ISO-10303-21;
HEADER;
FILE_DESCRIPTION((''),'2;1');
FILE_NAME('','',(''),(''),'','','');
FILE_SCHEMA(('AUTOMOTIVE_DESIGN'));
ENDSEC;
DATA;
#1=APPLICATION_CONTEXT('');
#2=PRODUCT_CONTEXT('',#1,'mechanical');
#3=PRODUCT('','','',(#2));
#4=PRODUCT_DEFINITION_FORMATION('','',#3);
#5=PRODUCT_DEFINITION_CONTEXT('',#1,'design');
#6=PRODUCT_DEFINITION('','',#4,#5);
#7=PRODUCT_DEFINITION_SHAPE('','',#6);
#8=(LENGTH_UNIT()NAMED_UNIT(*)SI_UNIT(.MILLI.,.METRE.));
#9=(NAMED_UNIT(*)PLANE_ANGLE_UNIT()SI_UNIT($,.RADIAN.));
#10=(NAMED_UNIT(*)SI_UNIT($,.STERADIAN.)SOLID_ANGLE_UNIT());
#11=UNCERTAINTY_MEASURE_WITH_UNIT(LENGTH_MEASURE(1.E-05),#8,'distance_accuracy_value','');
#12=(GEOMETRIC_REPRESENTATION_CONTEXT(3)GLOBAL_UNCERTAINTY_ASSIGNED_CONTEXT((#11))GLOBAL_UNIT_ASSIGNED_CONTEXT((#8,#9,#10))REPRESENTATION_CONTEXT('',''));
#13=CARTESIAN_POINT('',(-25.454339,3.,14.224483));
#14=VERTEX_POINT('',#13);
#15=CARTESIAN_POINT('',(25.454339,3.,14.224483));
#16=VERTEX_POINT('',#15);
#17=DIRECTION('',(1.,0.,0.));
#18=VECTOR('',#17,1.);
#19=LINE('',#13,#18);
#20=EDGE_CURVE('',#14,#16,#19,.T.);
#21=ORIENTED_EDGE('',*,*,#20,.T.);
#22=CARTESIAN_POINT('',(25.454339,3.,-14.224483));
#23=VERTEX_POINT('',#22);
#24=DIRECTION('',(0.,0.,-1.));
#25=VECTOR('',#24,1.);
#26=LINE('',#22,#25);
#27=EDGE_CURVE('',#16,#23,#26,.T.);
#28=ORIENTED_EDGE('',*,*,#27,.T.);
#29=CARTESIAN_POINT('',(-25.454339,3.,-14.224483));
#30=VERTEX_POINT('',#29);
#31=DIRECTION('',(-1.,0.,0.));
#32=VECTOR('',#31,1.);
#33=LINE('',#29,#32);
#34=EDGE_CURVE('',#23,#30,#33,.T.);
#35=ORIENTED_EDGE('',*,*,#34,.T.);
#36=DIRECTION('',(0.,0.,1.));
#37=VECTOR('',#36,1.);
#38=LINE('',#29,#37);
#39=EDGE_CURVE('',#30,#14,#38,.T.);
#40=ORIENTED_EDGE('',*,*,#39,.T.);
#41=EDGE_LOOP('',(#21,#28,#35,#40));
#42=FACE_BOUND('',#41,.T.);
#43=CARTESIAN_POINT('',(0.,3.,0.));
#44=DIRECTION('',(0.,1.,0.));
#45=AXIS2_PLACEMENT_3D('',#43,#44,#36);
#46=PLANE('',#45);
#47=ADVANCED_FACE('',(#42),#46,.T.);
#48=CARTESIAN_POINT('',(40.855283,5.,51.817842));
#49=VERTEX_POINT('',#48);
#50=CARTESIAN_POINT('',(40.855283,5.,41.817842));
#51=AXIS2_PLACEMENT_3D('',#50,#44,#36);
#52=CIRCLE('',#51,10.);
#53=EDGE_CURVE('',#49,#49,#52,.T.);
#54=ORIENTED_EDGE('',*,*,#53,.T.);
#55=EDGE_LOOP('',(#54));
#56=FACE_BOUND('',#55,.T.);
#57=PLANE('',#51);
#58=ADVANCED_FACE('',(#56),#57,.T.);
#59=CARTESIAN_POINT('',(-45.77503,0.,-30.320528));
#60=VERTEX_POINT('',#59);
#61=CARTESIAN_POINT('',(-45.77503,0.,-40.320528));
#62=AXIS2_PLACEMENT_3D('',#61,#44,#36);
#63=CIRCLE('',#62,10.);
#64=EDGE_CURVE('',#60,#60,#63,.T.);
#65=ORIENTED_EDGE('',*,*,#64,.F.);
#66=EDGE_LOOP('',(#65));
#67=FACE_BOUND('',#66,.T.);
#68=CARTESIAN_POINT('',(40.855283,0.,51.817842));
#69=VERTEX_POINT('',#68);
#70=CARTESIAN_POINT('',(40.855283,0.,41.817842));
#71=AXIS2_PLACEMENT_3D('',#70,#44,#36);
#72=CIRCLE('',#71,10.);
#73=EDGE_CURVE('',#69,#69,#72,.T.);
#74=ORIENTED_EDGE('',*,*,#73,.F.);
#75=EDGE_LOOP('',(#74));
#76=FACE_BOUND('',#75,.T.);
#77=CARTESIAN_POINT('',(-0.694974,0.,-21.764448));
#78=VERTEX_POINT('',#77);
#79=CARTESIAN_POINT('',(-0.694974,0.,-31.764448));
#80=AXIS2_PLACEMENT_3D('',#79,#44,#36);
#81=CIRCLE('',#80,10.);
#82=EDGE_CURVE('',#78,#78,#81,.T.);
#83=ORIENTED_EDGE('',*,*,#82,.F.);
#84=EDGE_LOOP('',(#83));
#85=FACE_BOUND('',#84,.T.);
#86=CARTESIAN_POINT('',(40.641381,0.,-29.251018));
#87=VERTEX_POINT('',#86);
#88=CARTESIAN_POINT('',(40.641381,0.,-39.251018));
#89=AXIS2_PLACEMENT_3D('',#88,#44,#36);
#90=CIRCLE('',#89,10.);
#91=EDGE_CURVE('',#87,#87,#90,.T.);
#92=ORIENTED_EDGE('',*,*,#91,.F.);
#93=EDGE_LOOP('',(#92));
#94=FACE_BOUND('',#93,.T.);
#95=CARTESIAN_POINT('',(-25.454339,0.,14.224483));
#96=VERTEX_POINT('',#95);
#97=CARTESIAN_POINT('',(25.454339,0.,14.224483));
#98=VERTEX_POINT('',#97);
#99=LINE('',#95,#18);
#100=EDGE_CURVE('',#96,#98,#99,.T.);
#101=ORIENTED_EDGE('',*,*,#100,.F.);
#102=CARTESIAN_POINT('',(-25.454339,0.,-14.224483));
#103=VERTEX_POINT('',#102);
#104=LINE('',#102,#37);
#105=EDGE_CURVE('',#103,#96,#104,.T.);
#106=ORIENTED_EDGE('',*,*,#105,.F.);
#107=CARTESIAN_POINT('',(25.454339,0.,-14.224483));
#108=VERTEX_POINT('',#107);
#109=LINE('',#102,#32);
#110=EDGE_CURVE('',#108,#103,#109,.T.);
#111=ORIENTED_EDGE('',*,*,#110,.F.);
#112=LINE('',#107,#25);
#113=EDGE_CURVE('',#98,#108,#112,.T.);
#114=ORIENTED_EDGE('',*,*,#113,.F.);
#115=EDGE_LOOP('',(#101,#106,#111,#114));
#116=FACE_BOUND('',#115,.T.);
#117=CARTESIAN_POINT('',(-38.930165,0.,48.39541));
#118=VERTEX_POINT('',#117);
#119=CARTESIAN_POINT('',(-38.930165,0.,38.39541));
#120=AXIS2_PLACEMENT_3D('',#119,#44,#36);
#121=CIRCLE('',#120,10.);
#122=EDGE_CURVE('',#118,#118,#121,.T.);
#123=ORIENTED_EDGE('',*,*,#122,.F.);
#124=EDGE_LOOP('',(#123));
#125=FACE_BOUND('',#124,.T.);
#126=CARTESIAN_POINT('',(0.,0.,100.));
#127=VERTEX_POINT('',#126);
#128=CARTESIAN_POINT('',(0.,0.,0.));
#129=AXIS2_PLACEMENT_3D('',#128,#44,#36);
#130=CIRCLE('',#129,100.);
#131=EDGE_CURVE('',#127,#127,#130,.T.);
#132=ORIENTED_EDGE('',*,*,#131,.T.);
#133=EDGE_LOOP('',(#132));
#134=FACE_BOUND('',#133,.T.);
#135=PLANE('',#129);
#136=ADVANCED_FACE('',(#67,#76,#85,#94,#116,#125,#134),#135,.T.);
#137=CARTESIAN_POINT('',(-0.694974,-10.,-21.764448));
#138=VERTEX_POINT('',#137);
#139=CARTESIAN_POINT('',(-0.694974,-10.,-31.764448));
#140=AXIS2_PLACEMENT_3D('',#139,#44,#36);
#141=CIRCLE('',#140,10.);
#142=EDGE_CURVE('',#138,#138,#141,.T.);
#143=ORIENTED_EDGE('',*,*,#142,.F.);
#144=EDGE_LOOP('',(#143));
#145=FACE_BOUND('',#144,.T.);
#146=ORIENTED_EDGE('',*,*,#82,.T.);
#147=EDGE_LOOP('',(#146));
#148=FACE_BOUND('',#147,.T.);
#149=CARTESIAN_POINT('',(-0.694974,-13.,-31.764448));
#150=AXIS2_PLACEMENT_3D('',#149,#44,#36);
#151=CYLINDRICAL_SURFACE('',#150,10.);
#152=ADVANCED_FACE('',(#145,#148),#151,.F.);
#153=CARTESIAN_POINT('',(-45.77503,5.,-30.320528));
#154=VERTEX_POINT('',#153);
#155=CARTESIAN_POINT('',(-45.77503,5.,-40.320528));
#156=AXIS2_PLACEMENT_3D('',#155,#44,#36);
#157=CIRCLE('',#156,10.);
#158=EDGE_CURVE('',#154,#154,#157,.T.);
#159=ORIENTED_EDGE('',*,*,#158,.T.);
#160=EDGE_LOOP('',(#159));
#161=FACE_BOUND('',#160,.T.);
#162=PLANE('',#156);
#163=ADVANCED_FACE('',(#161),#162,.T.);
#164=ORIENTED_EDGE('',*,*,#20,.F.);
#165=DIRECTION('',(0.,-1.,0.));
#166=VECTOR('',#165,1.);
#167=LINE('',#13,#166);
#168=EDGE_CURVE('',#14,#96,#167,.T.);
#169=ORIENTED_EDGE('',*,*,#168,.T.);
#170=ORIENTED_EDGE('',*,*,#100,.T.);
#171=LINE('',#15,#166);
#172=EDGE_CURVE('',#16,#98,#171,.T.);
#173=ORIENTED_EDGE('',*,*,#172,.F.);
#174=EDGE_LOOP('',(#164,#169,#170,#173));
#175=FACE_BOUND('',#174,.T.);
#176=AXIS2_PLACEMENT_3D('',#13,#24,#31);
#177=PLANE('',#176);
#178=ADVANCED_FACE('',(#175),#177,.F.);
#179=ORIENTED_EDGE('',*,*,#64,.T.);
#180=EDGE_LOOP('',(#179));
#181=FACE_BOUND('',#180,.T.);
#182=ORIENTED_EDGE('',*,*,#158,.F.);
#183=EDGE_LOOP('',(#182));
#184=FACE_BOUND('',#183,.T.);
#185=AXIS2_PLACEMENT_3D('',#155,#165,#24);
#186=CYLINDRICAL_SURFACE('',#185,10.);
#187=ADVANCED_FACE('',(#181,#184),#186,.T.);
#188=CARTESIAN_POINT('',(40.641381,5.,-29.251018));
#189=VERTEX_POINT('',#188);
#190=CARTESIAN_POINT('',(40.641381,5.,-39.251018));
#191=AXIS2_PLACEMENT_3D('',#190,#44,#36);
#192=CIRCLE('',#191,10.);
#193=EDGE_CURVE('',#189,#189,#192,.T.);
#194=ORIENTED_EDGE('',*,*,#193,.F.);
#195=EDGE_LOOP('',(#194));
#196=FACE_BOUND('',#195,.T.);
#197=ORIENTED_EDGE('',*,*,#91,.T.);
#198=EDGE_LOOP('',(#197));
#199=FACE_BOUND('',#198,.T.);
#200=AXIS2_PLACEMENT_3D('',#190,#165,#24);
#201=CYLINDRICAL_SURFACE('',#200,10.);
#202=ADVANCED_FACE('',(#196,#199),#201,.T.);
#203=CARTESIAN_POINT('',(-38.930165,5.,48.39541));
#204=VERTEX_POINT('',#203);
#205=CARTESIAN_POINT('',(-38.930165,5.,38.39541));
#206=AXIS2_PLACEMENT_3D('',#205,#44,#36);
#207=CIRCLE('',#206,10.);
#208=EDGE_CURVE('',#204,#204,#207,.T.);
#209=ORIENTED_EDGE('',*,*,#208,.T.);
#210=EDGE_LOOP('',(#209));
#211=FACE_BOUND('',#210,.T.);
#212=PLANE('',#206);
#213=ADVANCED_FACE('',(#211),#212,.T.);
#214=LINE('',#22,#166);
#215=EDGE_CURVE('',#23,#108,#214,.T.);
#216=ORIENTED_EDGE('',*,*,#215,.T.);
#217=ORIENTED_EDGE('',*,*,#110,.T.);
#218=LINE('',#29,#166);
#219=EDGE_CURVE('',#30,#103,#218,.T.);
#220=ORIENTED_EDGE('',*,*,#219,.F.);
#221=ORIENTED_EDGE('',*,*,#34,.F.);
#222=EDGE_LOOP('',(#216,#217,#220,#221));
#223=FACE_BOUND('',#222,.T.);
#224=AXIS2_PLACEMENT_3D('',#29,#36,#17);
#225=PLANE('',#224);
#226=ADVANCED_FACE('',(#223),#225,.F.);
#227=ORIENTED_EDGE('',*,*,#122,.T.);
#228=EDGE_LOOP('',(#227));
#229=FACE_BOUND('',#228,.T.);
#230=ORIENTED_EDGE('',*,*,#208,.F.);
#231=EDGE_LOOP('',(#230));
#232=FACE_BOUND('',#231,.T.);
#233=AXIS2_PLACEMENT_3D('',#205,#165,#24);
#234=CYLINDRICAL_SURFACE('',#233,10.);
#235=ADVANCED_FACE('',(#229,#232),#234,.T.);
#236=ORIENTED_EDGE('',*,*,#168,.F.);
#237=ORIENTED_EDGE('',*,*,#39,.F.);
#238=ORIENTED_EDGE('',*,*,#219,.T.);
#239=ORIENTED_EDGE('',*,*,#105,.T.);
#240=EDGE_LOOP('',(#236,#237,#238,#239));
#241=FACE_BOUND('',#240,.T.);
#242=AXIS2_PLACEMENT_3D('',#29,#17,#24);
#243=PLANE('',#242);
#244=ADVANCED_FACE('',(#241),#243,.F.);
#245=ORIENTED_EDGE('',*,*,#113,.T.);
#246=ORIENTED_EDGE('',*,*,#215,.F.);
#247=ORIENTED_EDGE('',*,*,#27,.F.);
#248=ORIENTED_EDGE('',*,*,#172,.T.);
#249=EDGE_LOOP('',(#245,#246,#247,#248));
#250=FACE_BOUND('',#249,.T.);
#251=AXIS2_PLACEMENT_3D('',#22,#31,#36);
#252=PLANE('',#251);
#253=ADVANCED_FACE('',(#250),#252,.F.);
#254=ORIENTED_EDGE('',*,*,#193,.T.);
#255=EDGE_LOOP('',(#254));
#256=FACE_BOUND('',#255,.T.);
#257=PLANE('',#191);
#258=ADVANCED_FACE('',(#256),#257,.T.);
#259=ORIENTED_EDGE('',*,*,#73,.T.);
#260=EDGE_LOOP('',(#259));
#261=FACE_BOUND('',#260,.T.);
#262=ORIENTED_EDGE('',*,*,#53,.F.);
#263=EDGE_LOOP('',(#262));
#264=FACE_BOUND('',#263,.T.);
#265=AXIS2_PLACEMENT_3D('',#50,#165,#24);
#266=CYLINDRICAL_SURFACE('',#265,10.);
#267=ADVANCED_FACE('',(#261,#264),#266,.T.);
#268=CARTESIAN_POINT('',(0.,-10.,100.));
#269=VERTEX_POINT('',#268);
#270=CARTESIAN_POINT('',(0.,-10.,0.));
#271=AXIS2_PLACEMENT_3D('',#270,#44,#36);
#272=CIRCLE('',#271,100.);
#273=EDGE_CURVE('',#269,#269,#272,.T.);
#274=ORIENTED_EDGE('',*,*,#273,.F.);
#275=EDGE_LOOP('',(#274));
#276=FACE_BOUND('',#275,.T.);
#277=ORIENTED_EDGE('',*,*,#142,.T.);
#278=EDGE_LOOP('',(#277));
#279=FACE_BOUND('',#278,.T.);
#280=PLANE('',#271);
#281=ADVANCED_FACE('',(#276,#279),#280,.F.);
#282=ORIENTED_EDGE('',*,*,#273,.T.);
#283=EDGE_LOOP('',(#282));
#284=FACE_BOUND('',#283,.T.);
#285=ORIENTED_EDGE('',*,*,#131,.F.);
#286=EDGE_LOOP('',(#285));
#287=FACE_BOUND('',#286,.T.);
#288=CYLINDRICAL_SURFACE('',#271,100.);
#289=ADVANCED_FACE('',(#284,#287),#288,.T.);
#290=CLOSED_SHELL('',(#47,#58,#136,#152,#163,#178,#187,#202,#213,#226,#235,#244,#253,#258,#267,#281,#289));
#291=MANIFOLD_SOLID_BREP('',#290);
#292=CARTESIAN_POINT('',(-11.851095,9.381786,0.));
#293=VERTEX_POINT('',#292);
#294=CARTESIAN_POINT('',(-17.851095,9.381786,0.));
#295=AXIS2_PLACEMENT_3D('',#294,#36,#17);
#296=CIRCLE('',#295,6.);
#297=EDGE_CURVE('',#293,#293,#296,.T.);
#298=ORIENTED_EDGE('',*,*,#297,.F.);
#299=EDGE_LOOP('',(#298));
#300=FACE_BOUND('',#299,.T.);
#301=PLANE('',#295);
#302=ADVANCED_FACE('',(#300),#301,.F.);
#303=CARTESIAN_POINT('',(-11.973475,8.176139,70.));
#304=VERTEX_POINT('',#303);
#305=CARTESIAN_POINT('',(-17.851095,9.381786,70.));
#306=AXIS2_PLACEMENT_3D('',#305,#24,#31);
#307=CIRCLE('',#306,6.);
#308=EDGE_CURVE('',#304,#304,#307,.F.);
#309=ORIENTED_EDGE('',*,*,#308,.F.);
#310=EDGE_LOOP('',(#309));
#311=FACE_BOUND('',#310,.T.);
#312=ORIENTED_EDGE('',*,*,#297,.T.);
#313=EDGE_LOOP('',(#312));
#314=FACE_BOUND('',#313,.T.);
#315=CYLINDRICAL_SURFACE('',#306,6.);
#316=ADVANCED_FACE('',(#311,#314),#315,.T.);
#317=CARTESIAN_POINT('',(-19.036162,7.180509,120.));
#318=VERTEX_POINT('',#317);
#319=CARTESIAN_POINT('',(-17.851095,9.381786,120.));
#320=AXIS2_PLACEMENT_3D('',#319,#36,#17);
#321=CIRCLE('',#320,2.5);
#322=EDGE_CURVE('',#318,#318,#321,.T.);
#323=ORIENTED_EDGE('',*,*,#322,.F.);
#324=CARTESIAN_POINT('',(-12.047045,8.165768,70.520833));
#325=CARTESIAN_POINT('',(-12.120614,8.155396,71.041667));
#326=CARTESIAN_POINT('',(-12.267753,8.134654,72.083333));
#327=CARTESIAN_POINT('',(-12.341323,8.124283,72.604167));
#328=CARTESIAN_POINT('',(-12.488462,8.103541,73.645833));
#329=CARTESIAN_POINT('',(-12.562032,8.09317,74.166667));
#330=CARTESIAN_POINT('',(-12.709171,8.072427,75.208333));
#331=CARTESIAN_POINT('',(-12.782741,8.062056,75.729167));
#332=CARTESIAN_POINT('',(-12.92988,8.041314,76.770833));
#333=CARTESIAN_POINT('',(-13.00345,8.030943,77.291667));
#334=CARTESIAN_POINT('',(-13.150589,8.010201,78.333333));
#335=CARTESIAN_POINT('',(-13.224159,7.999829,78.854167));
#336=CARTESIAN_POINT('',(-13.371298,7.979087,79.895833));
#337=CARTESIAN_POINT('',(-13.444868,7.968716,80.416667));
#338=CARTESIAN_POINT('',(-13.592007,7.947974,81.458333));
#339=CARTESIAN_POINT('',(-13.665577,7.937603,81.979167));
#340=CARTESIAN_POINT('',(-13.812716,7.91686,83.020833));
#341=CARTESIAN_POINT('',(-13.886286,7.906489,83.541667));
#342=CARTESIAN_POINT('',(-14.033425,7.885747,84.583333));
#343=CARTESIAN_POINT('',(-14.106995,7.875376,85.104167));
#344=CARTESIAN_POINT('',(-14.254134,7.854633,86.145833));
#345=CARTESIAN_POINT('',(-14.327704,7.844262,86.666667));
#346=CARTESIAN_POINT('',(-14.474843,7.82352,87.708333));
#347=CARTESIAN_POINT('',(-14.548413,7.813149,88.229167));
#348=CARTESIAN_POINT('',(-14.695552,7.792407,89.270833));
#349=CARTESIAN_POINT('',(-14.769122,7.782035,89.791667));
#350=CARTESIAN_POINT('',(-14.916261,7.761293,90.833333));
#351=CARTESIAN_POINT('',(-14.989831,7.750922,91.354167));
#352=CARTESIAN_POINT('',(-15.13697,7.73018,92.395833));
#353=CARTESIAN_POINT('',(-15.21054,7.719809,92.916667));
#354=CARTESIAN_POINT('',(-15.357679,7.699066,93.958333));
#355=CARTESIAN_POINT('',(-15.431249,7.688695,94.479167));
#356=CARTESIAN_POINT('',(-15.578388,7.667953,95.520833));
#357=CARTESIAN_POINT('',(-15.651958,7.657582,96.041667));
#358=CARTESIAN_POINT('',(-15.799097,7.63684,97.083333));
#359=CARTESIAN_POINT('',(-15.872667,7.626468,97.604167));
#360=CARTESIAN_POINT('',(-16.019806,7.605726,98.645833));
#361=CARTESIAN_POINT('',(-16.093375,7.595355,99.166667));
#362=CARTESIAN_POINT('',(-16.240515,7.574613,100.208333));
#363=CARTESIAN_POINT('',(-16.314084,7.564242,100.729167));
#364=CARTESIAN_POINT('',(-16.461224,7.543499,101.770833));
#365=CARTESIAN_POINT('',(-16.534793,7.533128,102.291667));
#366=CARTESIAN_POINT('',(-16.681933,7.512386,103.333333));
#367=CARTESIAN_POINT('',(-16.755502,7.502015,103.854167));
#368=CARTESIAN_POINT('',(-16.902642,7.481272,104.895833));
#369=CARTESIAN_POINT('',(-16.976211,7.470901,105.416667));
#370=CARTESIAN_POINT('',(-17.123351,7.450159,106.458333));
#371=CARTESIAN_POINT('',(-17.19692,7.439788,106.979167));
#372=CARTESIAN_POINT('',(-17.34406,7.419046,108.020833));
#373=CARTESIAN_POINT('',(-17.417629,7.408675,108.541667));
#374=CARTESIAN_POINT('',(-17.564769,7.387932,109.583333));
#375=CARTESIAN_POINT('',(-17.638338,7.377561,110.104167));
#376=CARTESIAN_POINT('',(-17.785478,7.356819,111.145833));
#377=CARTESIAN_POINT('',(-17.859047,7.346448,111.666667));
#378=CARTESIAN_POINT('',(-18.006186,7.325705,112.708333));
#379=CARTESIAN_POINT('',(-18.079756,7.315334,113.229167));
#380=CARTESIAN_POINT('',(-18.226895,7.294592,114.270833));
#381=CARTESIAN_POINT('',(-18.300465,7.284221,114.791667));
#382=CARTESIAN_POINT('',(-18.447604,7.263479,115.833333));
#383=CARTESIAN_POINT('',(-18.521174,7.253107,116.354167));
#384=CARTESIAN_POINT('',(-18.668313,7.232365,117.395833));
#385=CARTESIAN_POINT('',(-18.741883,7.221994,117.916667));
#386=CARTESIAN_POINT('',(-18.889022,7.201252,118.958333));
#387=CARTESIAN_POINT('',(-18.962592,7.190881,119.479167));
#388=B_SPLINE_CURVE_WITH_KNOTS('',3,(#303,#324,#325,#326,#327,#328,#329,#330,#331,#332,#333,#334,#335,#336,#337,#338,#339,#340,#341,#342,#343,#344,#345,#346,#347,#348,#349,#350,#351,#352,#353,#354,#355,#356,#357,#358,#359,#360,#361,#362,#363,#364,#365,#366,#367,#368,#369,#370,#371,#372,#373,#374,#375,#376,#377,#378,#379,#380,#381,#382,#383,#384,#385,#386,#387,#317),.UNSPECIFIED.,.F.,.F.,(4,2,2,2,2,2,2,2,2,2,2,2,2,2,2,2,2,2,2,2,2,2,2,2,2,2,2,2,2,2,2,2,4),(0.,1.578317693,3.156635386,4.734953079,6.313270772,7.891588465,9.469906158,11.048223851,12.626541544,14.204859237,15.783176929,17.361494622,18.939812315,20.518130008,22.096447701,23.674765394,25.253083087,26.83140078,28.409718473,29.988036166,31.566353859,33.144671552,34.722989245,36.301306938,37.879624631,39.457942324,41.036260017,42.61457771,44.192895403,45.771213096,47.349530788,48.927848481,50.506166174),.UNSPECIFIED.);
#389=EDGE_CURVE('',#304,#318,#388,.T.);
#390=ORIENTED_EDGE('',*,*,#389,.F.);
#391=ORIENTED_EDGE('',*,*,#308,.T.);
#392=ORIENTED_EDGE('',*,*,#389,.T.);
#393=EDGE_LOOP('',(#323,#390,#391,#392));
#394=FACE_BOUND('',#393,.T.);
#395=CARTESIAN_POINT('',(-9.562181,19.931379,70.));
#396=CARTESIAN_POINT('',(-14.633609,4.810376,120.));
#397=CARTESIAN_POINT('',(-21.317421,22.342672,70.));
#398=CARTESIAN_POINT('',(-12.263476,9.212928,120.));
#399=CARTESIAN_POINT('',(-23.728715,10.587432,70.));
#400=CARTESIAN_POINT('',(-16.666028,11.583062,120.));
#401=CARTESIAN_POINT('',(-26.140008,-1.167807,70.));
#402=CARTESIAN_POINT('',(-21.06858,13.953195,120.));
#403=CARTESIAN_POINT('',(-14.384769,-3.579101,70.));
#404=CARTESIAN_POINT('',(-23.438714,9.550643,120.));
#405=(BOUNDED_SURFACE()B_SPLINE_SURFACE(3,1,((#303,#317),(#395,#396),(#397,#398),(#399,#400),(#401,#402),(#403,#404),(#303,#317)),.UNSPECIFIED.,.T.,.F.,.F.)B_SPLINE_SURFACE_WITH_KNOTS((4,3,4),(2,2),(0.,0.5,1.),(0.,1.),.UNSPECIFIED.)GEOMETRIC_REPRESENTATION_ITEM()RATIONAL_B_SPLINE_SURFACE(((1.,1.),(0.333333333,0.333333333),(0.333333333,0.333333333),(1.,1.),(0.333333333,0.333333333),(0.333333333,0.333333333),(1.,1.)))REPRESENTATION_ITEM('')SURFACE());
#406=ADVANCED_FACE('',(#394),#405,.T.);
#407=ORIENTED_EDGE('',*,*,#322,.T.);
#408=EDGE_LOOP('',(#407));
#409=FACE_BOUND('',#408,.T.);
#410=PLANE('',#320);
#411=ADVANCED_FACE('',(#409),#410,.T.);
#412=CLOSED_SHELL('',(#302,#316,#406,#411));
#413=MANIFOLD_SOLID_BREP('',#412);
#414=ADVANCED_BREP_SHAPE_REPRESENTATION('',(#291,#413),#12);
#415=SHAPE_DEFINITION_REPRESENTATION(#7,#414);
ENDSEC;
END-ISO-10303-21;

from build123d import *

# Parameters (mm, degrees)
SKETCH_1_R          = 100
EXTRUDE_1_DEPTH     = 10
SKETCH_3_W          = 50.90867769
SKETCH_3_H          = 28.448966944
EXTRUDE_2_DEPTH     = 3
SKETCH_4_R          = 10
CUT_EXTRUDE_1_DEPTH = 13
SKETCH_5_R          = 10
EXTRUDE_3_DEPTH     = 5
SKETCH_6_R          = 6
EXTRUDE_5_DEPTH     = 70


with BuildPart() as part:
    # 草图1 → 凸台-拉伸1 (new body)
    with BuildSketch(Plane(origin=(0, 0, 0), x_dir=(1, 0, 0), z_dir=(0, 1, 0))):
        with Locations(Location((0, 0, 0), (0, 0, 270))):
            Circle(SKETCH_1_R)
    extrude(amount=-EXTRUDE_1_DEPTH)

    # 草图3 → 凸台-拉伸2 (add)
    with BuildSketch(Plane(origin=(0, 0, 0), x_dir=(1, 0, 0), z_dir=(0, 1, 0))):
        Rectangle(SKETCH_3_W, SKETCH_3_H)
    extrude(amount=EXTRUDE_2_DEPTH)

    # 草图4 → 切除-拉伸1 (cut)
    with BuildSketch(Plane(origin=(0, 0, 0), x_dir=(1, 0, 0), z_dir=(0, 1, 0))):
        with Locations(Location((-0.694974251, 31.764448054, 0), (0, 0, 270))):
            Circle(SKETCH_4_R)
    extrude(amount=-CUT_EXTRUDE_1_DEPTH, mode=Mode.SUBTRACT)

    # 草图5 → 凸台-拉伸3 (add)
    with BuildSketch(Plane(origin=(0, 0, 0), x_dir=(1, 0, 0), z_dir=(0, 1, 0))):
        with Locations(Location((40.855283356, -41.817842388, 0), (0, 0, 270))):
            Circle(SKETCH_5_R)
        with Locations(Location((-38.930165292, -38.395410274, 0), (0, 0, 270))):
            Circle(SKETCH_5_R)
        with Locations(Location((-45.775029519, 40.320528338, 0), (0, 0, 270))):
            Circle(SKETCH_5_R)
        with Locations(Location((40.641381349, 39.251018302, 0), (0, 0, 270))):
            Circle(SKETCH_5_R)
    extrude(amount=EXTRUDE_3_DEPTH)


with BuildPart() as body_2:
    # 草图6 → 凸台-拉伸5 (new body)
    with BuildSketch(Plane.XY):
        with Locations((-17.851094774, 9.381785608)):
            Circle(SKETCH_6_R)
    extrude(amount=EXTRUDE_5_DEPTH)

    # 放样1: read off the stored shape, not the designer's step
    # 放样1: loft between two sections, ruled curve by curve
    loft_1_from = [
        Edge.make_bspline([(-11.973474879, 8.17613874, 70), (-9.562181143, 19.93137853, 70), (-21.317420933, 22.342672266, 70), (-23.728714669, 10.587432476, 70), (-26.140008405, -1.167807313, 70), (-14.384768615, -3.57910105, 70), (-11.973474879, 8.17613874, 70)], [0, 0, 0, 0, 0.5, 0.5, 0.5, 1, 1, 1, 1], 3, [1, 0.333333333, 0.333333333, 1, 0.333333333, 0.333333333, 1]),
    ]
    loft_1_to = [
        Edge.make_bspline([(-19.036161622, 7.180509486, 120), (-14.633609377, 4.810375791, 120), (-12.263475682, 9.212928036, 120), (-16.666027927, 11.583061731, 120), (-21.068580172, 13.953195426, 120), (-23.438713866, 9.550643181, 120), (-19.036161622, 7.180509486, 120)], [0, 0, 0, 0, 0.5, 0.5, 0.5, 1, 1, 1, 1], 3, [1, 0.333333333, 0.333333333, 1, 0.333333333, 0.333333333, 1]),
    ]
    loft_1 = Solid(Shell([*[Face.make_surface_from_curves(loft_1_from[k], loft_1_to[k]) for k in range(1)], Face(Wire(loft_1_from)), Face(Wire(loft_1_to))]))
    add(loft_1)


solid = Compound([part.part, body_2.part])
